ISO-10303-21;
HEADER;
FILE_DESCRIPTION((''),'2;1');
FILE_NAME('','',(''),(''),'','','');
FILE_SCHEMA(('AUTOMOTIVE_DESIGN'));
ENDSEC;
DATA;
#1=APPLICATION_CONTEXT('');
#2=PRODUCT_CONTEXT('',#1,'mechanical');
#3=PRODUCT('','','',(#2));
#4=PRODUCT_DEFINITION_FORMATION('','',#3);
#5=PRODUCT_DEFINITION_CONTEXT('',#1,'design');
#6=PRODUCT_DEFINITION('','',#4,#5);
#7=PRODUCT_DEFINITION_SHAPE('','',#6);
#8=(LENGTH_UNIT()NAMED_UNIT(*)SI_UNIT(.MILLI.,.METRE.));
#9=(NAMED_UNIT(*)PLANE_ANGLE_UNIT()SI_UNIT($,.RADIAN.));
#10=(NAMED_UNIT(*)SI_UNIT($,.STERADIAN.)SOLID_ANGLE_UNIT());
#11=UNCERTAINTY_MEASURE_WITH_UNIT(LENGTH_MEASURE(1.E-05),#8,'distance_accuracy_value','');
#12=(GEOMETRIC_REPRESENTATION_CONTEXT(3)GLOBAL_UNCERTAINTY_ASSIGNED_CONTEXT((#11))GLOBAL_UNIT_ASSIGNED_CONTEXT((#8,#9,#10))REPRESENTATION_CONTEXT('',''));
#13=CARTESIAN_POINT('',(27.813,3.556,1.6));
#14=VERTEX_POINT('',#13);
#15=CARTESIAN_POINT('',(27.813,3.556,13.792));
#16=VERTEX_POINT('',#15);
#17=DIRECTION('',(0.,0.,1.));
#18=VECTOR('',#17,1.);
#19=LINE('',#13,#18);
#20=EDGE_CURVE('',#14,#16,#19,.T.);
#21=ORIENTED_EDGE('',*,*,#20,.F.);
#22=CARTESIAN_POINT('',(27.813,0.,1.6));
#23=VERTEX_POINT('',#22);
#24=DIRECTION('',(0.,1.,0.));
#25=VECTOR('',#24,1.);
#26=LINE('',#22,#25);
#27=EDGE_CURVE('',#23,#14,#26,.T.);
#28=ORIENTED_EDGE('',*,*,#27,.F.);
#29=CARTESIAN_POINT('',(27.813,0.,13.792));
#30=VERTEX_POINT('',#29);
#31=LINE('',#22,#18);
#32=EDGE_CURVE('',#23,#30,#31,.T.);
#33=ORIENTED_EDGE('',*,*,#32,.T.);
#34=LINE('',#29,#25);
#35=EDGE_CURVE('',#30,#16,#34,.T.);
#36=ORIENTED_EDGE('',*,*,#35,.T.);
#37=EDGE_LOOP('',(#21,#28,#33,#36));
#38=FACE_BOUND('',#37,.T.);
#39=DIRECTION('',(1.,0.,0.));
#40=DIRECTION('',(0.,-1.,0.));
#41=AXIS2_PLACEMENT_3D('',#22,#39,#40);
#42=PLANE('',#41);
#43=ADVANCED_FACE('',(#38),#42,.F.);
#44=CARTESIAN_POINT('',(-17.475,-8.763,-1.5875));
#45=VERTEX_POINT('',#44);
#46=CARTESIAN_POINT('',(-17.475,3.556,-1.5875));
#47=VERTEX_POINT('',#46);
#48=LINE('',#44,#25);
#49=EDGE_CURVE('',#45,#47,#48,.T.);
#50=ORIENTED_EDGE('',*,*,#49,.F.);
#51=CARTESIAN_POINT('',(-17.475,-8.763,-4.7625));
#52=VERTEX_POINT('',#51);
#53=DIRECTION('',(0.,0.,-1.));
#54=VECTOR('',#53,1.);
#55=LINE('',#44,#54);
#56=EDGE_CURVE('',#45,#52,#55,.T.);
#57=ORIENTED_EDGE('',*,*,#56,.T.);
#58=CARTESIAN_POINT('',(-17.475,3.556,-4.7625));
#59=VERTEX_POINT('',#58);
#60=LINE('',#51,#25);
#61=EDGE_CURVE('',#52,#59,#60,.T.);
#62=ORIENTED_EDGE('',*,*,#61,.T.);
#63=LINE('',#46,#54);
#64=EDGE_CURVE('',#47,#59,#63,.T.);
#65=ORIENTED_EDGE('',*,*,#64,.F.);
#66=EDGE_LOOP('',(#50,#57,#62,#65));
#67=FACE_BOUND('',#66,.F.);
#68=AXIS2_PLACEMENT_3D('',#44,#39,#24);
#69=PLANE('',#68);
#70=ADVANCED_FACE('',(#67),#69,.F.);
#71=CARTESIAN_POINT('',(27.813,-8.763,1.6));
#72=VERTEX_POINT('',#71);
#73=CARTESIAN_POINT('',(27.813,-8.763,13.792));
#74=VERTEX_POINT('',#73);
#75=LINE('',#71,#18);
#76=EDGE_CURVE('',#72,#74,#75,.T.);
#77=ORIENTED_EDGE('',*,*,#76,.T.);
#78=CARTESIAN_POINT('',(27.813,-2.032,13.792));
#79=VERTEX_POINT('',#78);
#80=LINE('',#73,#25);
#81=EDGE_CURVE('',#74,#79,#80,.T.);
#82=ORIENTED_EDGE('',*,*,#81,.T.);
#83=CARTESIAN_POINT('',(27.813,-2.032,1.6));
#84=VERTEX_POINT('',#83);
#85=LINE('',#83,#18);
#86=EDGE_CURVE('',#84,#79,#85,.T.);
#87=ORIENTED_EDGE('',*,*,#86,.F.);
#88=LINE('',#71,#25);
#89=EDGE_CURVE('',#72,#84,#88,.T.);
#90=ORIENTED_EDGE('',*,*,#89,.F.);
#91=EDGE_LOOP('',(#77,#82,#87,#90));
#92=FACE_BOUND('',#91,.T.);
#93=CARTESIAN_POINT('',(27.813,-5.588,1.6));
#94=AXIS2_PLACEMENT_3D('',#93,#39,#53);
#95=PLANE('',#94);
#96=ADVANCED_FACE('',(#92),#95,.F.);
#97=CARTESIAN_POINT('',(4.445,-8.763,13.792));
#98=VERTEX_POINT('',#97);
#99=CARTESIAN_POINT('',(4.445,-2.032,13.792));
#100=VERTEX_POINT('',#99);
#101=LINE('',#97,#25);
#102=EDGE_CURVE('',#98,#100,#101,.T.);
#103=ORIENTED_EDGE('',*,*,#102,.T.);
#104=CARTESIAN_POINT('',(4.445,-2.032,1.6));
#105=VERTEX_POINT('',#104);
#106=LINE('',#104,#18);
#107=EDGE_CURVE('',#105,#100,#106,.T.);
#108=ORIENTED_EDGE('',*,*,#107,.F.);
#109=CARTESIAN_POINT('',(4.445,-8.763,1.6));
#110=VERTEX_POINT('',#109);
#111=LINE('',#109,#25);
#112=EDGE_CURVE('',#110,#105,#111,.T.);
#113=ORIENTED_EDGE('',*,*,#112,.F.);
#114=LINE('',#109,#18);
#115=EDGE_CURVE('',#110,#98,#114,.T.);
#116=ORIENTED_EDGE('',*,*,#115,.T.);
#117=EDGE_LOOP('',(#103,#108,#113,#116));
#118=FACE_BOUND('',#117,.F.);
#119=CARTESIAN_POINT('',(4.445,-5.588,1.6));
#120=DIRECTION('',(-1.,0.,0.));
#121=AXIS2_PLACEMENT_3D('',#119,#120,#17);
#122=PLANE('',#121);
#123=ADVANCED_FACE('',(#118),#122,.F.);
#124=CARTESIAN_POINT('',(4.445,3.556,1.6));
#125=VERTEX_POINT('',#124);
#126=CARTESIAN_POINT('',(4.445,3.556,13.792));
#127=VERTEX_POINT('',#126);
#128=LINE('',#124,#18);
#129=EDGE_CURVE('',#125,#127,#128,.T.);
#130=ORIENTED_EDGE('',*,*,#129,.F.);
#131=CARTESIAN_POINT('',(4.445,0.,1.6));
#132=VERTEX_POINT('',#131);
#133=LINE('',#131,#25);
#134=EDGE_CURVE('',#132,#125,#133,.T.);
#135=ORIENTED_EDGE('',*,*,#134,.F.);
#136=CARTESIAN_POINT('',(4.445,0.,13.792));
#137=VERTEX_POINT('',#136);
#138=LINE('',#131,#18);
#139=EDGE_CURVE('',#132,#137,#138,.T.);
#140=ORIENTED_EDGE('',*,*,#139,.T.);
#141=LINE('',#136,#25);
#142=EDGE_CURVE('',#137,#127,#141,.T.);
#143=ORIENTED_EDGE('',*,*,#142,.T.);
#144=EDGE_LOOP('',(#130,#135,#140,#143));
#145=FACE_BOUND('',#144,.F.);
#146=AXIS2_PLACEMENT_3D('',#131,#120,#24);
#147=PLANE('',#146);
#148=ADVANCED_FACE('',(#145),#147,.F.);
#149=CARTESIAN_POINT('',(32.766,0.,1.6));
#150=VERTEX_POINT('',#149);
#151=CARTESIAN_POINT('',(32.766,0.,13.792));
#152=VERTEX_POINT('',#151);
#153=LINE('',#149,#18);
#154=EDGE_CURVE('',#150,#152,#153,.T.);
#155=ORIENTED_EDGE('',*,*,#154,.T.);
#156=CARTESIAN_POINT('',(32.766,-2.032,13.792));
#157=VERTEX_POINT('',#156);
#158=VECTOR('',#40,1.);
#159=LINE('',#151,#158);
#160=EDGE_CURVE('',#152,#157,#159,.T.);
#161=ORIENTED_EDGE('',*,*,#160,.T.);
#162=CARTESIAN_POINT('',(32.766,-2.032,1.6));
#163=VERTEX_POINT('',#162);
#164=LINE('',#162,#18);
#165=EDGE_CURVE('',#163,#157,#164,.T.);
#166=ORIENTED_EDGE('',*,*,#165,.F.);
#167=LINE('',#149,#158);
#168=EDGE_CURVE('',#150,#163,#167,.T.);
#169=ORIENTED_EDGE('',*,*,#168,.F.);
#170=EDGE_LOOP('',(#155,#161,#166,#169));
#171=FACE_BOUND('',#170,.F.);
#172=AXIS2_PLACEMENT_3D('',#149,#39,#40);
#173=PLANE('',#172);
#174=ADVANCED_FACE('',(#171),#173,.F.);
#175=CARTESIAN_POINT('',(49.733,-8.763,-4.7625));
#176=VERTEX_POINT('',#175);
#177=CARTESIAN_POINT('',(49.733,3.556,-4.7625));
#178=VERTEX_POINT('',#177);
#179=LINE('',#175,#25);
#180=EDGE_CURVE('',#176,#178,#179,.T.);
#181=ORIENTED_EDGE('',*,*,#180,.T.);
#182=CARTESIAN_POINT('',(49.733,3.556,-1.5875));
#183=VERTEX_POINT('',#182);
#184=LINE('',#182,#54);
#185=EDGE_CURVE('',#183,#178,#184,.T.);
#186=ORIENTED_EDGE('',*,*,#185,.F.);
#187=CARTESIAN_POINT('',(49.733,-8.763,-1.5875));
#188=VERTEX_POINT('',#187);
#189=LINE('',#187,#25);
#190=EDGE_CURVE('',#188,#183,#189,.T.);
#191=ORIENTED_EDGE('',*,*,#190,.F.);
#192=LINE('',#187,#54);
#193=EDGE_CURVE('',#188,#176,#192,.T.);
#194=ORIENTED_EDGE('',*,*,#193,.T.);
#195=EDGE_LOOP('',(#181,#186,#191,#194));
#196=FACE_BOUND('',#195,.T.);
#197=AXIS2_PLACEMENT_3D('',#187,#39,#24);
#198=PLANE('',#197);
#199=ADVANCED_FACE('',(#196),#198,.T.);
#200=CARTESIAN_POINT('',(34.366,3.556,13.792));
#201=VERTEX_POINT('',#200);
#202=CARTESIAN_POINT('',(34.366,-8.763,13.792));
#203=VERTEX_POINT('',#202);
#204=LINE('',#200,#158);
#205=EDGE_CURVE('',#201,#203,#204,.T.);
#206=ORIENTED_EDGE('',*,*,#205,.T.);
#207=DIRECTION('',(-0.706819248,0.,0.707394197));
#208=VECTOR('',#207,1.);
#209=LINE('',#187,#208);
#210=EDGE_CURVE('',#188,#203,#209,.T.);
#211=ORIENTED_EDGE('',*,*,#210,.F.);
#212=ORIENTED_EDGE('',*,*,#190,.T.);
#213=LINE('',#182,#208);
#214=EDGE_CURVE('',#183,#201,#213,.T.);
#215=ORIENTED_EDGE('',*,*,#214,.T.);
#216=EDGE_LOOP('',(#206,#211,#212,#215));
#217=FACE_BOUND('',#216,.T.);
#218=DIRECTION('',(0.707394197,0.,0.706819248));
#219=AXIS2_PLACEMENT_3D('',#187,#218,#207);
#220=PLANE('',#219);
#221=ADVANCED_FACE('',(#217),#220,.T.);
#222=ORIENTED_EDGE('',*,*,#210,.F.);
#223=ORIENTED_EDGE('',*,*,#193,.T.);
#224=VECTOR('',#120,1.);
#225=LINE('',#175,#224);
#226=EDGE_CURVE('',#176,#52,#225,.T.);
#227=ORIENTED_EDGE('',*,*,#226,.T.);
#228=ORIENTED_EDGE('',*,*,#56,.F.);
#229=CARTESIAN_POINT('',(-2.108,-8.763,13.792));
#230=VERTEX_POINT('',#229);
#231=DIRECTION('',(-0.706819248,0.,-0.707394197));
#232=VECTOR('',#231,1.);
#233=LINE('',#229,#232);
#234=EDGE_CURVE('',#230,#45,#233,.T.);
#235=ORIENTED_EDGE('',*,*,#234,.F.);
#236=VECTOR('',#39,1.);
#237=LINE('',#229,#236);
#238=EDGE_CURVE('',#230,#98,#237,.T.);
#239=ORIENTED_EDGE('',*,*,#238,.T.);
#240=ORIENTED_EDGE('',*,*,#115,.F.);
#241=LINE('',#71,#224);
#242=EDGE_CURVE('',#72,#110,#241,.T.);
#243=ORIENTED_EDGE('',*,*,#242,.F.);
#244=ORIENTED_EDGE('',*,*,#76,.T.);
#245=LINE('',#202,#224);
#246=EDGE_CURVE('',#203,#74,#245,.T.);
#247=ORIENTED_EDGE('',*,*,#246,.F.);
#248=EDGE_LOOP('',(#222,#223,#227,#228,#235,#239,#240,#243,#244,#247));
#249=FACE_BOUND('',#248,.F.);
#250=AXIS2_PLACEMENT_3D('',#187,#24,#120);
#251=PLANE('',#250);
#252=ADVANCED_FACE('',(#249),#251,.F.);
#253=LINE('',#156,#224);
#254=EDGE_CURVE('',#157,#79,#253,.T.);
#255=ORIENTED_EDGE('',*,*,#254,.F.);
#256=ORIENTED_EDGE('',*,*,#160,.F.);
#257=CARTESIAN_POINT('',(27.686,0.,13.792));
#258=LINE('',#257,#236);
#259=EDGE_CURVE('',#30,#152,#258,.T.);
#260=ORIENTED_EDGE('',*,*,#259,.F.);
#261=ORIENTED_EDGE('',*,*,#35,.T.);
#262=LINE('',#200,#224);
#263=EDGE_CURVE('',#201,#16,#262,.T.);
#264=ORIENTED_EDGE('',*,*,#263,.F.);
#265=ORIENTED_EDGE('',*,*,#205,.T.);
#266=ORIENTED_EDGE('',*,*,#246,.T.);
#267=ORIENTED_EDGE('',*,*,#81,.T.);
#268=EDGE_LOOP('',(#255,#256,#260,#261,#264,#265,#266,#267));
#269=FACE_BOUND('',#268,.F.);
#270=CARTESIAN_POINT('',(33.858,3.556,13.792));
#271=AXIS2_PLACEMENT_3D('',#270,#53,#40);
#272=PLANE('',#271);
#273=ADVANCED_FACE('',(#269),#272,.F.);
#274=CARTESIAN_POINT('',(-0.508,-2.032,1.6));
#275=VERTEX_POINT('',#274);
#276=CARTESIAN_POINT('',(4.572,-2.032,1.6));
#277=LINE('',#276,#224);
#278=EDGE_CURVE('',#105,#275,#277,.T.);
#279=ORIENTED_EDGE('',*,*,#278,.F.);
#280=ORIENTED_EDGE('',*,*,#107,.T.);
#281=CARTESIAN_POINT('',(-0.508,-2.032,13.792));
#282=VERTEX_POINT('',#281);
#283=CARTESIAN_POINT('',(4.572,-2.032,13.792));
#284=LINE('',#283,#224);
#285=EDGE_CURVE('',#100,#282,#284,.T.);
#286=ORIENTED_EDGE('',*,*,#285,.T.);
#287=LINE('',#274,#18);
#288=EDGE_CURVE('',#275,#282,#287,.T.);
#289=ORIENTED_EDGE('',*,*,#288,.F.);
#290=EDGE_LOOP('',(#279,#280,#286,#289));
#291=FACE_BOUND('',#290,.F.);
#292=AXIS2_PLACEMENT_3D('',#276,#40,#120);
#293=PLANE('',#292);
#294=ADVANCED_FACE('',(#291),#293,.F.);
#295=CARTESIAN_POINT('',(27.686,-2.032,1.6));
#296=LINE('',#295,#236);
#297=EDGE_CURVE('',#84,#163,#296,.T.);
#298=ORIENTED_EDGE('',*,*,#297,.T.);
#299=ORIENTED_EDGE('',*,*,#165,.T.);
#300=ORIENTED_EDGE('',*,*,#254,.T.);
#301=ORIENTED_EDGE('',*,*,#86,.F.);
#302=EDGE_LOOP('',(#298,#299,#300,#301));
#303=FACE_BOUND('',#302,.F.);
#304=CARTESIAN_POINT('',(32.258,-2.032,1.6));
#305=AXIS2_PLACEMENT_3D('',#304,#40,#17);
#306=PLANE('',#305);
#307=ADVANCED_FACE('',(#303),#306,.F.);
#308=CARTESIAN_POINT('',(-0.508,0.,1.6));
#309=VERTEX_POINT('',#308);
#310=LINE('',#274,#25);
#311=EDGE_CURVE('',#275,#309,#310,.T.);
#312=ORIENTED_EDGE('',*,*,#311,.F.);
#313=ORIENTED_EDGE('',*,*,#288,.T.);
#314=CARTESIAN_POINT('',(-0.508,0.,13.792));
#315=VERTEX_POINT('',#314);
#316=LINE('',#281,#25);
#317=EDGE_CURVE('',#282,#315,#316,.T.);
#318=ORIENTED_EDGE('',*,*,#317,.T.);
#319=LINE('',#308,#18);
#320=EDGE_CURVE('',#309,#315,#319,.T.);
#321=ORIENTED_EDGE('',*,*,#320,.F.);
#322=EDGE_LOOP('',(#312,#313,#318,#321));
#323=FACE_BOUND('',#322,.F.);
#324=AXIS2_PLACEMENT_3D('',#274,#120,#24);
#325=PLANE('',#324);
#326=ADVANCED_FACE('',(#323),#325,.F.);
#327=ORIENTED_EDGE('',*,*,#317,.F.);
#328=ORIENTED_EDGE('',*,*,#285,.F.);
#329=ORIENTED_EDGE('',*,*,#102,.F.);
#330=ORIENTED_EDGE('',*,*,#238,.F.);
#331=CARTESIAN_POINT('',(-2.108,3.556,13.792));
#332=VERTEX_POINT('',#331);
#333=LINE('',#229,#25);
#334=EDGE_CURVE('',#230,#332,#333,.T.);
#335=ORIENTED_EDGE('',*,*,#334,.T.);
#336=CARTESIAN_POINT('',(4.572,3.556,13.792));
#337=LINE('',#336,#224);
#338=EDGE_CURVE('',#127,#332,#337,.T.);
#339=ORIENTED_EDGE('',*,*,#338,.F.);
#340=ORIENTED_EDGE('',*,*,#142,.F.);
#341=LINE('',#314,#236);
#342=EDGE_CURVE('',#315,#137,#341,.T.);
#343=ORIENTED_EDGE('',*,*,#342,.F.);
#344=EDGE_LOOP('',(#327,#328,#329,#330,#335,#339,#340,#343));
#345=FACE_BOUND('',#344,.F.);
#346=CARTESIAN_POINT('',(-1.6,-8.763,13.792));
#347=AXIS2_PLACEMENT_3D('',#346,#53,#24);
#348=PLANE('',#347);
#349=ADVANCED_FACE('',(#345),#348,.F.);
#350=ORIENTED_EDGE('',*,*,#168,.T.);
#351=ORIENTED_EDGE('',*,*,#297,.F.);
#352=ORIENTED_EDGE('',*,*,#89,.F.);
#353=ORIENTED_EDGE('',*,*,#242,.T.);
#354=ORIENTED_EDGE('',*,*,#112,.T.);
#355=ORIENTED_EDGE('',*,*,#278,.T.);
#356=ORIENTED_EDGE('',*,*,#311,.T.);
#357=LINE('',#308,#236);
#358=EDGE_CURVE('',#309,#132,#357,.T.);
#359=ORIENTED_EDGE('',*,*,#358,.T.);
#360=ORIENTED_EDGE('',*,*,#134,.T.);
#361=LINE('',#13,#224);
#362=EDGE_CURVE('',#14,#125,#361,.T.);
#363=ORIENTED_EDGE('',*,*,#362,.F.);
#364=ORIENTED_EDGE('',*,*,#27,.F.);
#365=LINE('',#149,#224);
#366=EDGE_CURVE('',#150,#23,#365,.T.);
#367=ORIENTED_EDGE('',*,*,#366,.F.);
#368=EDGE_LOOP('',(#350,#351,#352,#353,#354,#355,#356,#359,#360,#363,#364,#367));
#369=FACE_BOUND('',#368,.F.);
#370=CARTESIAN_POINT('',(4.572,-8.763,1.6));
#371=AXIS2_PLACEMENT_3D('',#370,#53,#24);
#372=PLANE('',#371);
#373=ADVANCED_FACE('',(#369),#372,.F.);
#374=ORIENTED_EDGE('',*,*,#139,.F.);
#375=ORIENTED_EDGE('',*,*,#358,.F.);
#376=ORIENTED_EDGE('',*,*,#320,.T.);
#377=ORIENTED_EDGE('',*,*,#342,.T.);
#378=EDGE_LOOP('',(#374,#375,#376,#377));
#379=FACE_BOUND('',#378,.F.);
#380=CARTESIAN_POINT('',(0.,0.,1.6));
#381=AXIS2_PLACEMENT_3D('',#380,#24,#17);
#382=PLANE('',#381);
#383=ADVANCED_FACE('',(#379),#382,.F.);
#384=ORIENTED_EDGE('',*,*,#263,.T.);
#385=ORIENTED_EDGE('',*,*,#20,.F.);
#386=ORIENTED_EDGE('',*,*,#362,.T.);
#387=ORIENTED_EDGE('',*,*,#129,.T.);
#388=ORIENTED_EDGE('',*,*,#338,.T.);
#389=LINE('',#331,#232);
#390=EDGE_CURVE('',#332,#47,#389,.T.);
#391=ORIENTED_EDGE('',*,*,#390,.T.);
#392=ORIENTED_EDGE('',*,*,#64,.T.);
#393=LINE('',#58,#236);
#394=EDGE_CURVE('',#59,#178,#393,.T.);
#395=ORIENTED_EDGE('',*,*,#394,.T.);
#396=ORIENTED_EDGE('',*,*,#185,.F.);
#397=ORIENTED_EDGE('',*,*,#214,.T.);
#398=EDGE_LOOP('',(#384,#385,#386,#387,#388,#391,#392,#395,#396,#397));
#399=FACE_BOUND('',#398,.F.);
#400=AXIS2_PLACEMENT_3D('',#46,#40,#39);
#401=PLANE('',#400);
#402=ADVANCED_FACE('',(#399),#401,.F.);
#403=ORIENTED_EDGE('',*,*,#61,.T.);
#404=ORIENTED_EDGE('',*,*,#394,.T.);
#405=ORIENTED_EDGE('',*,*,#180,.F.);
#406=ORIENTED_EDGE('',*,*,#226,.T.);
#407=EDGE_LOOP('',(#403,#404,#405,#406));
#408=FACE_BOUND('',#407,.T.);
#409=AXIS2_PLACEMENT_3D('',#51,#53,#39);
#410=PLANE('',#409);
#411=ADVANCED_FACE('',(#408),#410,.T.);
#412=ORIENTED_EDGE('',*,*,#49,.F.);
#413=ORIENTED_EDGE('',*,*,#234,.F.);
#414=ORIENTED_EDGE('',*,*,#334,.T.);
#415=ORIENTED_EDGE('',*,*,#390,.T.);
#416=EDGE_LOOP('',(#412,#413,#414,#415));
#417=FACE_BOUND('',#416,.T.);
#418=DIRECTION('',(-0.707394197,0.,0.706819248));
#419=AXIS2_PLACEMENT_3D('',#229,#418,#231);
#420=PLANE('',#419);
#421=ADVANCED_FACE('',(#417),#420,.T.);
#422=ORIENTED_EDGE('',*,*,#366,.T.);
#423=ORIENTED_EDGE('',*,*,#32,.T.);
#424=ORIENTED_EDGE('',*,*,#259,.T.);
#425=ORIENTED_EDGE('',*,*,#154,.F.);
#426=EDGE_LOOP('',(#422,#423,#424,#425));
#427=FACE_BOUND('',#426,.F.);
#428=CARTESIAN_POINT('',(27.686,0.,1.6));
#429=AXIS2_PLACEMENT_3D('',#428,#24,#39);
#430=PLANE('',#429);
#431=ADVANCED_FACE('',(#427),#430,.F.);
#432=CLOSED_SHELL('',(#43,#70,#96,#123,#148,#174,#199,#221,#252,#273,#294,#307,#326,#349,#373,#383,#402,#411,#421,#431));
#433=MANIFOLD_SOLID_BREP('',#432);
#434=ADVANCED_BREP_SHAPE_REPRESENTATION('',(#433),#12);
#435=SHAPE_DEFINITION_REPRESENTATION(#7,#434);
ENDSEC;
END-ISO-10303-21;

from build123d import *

# Parameters (mm, degrees)
F0_W      = 4.572
F0_H      = 2.032
F1_DEPTH  = 1.6
F3_DEPTH  = 12.192
F4_DEPTH  = 3.175
F5_DEPTH  = 0.508
F6_DEPTH  = 0.508
F7_DEPTH  = 0.508
F8_DEPTH  = 0.508
F9_DEPTH  = 0.127
F11_DEPTH = 1.5875
F13_DEPTH = 12.319
F14_DEPTH = 3.175


# Not quite as in the source:
# - a feature of the source that left no trace in its solid (it failed there, or was rolled back) is left out
# - a pattern or mirror of a feature is missing from the dataset's text; its kind, count and spacing are read off the source's solid


with BuildPart() as f1:
    # F0 (on Top) → F1 (new body)
    with BuildSketch(Plane.XY):
        Polygon((0, -2.032), (0, 0), (4.572, 0), (4.572, 3.556), (-1.6, 3.556), (-1.6, -1.016), (-1.6, -5.588), (4.572, -5.588), (4.572, -2.032), align=None)
        Polygon((33.858, 3.556), (27.686, 3.556), (27.686, 0), (32.258, 0), (32.258, -2.032), (27.686, -2.032), (27.686, -5.588), (33.858, -5.588), (33.858, -1.016), align=None)
        Polygon((4.572, 3.556), (4.572, 0), (4.572, -2.032), (4.572, -5.588), (27.686, -5.588), (27.686, -2.032), (27.686, 0), (27.686, 3.556), align=None)
        with Locations((2.286, -1.016)):
            Rectangle(F0_W, F0_H)
        with Locations((29.972, -1.016)):
            Rectangle(F0_W, F0_H)
    extrude(amount=F1_DEPTH)

    # F2 (on face) → F3 (join)
    with BuildSketch(Plane.XY.offset(1.6)):
        Polygon((0, -2.032), (0, 0), (4.572, 0), (4.572, 3.556), (-1.6, 3.556), (-1.6, -1.016), (-1.6, -5.588), (4.572, -5.588), (4.572, -2.032), align=None)
        Polygon((33.858, 3.556), (27.686, 3.556), (27.686, 0), (32.258, 0), (32.258, -2.032), (27.686, -2.032), (27.686, -5.588), (33.858, -5.588), (33.858, -1.016), align=None)
    extrude(amount=F3_DEPTH)

    # F4 (add): a face of the model
    f4_faces = [f1.faces().sort_by_distance(p)[0] for p in [
        (-1.2195411943, -5.588, 6.896),
    ]]
    extrude(f4_faces, amount=F4_DEPTH)

    # F5 (add): a face of the model
    f5_faces = [f1.faces().sort_by_distance(p)[0] for p in [
        (-1.6, -2.6035, 6.896),
    ]]
    extrude(f5_faces, amount=F5_DEPTH)

    # F6 (cut): a face of the model
    f6_faces = [f1.faces().sort_by_distance(p)[0] for p in [
        (0, -1.016, 7.696),
    ]]
    extrude(f6_faces, amount=-F6_DEPTH, mode=Mode.SUBTRACT)

    # F7 (add): a face of the model
    f7_faces = [f1.faces().sort_by_distance(p)[0] for p in [
        (33.858, -2.6035, 6.896),
    ]]
    extrude(f7_faces, amount=F7_DEPTH)

    # F8 (cut): a face of the model
    f8_faces = [f1.faces().sort_by_distance(p)[0] for p in [
        (32.258, -1.016, 7.696),
    ]]
    extrude(f8_faces, amount=-F8_DEPTH, mode=Mode.SUBTRACT)

    # F9 (cut): faces of the model
    f9_faces = [f1.faces().sort_by_distance(p)[0] for p in [
        (4.572, -5.3975, 7.696),
        (4.572, 1.778, 7.696),
    ]]
    f9 = extrude(f9_faces, amount=-F9_DEPTH, mode=Mode.SUBTRACT)

    # F9_copies: F9 across plane
    add(f9.mirror(Plane(origin=(16.129, 0, 0), x_dir=(0, 0, 1), z_dir=(1, 0, 0))), mode=Mode.SUBTRACT)

    # F11 (add): a face of the model
    f11_faces = [f1.faces().sort_by_distance(p)[0] for p in [
        (16.129, -2.6035, 0),
    ]]
    extrude(f11_faces, amount=F11_DEPTH)

    # F12 (on face) → F13 (join, through all)
    with BuildSketch(Plane.XZ.offset(8.763)):
        Polygon((-2.108, -1.5875), (-2.108, 13.792), (-17.475, -1.5875), align=None)
        Polygon((49.733, -1.5875), (34.366, 13.792), (34.366, -1.5875), align=None)
    extrude(amount=-F13_DEPTH)

    # F14 (add): a face of the model
    f14_faces = [f1.faces().sort_by_distance(p)[0] for p in [
        (16.129, -2.6035, -1.5875),
    ]]
    extrude(f14_faces, amount=F14_DEPTH)


solid = f1.part
